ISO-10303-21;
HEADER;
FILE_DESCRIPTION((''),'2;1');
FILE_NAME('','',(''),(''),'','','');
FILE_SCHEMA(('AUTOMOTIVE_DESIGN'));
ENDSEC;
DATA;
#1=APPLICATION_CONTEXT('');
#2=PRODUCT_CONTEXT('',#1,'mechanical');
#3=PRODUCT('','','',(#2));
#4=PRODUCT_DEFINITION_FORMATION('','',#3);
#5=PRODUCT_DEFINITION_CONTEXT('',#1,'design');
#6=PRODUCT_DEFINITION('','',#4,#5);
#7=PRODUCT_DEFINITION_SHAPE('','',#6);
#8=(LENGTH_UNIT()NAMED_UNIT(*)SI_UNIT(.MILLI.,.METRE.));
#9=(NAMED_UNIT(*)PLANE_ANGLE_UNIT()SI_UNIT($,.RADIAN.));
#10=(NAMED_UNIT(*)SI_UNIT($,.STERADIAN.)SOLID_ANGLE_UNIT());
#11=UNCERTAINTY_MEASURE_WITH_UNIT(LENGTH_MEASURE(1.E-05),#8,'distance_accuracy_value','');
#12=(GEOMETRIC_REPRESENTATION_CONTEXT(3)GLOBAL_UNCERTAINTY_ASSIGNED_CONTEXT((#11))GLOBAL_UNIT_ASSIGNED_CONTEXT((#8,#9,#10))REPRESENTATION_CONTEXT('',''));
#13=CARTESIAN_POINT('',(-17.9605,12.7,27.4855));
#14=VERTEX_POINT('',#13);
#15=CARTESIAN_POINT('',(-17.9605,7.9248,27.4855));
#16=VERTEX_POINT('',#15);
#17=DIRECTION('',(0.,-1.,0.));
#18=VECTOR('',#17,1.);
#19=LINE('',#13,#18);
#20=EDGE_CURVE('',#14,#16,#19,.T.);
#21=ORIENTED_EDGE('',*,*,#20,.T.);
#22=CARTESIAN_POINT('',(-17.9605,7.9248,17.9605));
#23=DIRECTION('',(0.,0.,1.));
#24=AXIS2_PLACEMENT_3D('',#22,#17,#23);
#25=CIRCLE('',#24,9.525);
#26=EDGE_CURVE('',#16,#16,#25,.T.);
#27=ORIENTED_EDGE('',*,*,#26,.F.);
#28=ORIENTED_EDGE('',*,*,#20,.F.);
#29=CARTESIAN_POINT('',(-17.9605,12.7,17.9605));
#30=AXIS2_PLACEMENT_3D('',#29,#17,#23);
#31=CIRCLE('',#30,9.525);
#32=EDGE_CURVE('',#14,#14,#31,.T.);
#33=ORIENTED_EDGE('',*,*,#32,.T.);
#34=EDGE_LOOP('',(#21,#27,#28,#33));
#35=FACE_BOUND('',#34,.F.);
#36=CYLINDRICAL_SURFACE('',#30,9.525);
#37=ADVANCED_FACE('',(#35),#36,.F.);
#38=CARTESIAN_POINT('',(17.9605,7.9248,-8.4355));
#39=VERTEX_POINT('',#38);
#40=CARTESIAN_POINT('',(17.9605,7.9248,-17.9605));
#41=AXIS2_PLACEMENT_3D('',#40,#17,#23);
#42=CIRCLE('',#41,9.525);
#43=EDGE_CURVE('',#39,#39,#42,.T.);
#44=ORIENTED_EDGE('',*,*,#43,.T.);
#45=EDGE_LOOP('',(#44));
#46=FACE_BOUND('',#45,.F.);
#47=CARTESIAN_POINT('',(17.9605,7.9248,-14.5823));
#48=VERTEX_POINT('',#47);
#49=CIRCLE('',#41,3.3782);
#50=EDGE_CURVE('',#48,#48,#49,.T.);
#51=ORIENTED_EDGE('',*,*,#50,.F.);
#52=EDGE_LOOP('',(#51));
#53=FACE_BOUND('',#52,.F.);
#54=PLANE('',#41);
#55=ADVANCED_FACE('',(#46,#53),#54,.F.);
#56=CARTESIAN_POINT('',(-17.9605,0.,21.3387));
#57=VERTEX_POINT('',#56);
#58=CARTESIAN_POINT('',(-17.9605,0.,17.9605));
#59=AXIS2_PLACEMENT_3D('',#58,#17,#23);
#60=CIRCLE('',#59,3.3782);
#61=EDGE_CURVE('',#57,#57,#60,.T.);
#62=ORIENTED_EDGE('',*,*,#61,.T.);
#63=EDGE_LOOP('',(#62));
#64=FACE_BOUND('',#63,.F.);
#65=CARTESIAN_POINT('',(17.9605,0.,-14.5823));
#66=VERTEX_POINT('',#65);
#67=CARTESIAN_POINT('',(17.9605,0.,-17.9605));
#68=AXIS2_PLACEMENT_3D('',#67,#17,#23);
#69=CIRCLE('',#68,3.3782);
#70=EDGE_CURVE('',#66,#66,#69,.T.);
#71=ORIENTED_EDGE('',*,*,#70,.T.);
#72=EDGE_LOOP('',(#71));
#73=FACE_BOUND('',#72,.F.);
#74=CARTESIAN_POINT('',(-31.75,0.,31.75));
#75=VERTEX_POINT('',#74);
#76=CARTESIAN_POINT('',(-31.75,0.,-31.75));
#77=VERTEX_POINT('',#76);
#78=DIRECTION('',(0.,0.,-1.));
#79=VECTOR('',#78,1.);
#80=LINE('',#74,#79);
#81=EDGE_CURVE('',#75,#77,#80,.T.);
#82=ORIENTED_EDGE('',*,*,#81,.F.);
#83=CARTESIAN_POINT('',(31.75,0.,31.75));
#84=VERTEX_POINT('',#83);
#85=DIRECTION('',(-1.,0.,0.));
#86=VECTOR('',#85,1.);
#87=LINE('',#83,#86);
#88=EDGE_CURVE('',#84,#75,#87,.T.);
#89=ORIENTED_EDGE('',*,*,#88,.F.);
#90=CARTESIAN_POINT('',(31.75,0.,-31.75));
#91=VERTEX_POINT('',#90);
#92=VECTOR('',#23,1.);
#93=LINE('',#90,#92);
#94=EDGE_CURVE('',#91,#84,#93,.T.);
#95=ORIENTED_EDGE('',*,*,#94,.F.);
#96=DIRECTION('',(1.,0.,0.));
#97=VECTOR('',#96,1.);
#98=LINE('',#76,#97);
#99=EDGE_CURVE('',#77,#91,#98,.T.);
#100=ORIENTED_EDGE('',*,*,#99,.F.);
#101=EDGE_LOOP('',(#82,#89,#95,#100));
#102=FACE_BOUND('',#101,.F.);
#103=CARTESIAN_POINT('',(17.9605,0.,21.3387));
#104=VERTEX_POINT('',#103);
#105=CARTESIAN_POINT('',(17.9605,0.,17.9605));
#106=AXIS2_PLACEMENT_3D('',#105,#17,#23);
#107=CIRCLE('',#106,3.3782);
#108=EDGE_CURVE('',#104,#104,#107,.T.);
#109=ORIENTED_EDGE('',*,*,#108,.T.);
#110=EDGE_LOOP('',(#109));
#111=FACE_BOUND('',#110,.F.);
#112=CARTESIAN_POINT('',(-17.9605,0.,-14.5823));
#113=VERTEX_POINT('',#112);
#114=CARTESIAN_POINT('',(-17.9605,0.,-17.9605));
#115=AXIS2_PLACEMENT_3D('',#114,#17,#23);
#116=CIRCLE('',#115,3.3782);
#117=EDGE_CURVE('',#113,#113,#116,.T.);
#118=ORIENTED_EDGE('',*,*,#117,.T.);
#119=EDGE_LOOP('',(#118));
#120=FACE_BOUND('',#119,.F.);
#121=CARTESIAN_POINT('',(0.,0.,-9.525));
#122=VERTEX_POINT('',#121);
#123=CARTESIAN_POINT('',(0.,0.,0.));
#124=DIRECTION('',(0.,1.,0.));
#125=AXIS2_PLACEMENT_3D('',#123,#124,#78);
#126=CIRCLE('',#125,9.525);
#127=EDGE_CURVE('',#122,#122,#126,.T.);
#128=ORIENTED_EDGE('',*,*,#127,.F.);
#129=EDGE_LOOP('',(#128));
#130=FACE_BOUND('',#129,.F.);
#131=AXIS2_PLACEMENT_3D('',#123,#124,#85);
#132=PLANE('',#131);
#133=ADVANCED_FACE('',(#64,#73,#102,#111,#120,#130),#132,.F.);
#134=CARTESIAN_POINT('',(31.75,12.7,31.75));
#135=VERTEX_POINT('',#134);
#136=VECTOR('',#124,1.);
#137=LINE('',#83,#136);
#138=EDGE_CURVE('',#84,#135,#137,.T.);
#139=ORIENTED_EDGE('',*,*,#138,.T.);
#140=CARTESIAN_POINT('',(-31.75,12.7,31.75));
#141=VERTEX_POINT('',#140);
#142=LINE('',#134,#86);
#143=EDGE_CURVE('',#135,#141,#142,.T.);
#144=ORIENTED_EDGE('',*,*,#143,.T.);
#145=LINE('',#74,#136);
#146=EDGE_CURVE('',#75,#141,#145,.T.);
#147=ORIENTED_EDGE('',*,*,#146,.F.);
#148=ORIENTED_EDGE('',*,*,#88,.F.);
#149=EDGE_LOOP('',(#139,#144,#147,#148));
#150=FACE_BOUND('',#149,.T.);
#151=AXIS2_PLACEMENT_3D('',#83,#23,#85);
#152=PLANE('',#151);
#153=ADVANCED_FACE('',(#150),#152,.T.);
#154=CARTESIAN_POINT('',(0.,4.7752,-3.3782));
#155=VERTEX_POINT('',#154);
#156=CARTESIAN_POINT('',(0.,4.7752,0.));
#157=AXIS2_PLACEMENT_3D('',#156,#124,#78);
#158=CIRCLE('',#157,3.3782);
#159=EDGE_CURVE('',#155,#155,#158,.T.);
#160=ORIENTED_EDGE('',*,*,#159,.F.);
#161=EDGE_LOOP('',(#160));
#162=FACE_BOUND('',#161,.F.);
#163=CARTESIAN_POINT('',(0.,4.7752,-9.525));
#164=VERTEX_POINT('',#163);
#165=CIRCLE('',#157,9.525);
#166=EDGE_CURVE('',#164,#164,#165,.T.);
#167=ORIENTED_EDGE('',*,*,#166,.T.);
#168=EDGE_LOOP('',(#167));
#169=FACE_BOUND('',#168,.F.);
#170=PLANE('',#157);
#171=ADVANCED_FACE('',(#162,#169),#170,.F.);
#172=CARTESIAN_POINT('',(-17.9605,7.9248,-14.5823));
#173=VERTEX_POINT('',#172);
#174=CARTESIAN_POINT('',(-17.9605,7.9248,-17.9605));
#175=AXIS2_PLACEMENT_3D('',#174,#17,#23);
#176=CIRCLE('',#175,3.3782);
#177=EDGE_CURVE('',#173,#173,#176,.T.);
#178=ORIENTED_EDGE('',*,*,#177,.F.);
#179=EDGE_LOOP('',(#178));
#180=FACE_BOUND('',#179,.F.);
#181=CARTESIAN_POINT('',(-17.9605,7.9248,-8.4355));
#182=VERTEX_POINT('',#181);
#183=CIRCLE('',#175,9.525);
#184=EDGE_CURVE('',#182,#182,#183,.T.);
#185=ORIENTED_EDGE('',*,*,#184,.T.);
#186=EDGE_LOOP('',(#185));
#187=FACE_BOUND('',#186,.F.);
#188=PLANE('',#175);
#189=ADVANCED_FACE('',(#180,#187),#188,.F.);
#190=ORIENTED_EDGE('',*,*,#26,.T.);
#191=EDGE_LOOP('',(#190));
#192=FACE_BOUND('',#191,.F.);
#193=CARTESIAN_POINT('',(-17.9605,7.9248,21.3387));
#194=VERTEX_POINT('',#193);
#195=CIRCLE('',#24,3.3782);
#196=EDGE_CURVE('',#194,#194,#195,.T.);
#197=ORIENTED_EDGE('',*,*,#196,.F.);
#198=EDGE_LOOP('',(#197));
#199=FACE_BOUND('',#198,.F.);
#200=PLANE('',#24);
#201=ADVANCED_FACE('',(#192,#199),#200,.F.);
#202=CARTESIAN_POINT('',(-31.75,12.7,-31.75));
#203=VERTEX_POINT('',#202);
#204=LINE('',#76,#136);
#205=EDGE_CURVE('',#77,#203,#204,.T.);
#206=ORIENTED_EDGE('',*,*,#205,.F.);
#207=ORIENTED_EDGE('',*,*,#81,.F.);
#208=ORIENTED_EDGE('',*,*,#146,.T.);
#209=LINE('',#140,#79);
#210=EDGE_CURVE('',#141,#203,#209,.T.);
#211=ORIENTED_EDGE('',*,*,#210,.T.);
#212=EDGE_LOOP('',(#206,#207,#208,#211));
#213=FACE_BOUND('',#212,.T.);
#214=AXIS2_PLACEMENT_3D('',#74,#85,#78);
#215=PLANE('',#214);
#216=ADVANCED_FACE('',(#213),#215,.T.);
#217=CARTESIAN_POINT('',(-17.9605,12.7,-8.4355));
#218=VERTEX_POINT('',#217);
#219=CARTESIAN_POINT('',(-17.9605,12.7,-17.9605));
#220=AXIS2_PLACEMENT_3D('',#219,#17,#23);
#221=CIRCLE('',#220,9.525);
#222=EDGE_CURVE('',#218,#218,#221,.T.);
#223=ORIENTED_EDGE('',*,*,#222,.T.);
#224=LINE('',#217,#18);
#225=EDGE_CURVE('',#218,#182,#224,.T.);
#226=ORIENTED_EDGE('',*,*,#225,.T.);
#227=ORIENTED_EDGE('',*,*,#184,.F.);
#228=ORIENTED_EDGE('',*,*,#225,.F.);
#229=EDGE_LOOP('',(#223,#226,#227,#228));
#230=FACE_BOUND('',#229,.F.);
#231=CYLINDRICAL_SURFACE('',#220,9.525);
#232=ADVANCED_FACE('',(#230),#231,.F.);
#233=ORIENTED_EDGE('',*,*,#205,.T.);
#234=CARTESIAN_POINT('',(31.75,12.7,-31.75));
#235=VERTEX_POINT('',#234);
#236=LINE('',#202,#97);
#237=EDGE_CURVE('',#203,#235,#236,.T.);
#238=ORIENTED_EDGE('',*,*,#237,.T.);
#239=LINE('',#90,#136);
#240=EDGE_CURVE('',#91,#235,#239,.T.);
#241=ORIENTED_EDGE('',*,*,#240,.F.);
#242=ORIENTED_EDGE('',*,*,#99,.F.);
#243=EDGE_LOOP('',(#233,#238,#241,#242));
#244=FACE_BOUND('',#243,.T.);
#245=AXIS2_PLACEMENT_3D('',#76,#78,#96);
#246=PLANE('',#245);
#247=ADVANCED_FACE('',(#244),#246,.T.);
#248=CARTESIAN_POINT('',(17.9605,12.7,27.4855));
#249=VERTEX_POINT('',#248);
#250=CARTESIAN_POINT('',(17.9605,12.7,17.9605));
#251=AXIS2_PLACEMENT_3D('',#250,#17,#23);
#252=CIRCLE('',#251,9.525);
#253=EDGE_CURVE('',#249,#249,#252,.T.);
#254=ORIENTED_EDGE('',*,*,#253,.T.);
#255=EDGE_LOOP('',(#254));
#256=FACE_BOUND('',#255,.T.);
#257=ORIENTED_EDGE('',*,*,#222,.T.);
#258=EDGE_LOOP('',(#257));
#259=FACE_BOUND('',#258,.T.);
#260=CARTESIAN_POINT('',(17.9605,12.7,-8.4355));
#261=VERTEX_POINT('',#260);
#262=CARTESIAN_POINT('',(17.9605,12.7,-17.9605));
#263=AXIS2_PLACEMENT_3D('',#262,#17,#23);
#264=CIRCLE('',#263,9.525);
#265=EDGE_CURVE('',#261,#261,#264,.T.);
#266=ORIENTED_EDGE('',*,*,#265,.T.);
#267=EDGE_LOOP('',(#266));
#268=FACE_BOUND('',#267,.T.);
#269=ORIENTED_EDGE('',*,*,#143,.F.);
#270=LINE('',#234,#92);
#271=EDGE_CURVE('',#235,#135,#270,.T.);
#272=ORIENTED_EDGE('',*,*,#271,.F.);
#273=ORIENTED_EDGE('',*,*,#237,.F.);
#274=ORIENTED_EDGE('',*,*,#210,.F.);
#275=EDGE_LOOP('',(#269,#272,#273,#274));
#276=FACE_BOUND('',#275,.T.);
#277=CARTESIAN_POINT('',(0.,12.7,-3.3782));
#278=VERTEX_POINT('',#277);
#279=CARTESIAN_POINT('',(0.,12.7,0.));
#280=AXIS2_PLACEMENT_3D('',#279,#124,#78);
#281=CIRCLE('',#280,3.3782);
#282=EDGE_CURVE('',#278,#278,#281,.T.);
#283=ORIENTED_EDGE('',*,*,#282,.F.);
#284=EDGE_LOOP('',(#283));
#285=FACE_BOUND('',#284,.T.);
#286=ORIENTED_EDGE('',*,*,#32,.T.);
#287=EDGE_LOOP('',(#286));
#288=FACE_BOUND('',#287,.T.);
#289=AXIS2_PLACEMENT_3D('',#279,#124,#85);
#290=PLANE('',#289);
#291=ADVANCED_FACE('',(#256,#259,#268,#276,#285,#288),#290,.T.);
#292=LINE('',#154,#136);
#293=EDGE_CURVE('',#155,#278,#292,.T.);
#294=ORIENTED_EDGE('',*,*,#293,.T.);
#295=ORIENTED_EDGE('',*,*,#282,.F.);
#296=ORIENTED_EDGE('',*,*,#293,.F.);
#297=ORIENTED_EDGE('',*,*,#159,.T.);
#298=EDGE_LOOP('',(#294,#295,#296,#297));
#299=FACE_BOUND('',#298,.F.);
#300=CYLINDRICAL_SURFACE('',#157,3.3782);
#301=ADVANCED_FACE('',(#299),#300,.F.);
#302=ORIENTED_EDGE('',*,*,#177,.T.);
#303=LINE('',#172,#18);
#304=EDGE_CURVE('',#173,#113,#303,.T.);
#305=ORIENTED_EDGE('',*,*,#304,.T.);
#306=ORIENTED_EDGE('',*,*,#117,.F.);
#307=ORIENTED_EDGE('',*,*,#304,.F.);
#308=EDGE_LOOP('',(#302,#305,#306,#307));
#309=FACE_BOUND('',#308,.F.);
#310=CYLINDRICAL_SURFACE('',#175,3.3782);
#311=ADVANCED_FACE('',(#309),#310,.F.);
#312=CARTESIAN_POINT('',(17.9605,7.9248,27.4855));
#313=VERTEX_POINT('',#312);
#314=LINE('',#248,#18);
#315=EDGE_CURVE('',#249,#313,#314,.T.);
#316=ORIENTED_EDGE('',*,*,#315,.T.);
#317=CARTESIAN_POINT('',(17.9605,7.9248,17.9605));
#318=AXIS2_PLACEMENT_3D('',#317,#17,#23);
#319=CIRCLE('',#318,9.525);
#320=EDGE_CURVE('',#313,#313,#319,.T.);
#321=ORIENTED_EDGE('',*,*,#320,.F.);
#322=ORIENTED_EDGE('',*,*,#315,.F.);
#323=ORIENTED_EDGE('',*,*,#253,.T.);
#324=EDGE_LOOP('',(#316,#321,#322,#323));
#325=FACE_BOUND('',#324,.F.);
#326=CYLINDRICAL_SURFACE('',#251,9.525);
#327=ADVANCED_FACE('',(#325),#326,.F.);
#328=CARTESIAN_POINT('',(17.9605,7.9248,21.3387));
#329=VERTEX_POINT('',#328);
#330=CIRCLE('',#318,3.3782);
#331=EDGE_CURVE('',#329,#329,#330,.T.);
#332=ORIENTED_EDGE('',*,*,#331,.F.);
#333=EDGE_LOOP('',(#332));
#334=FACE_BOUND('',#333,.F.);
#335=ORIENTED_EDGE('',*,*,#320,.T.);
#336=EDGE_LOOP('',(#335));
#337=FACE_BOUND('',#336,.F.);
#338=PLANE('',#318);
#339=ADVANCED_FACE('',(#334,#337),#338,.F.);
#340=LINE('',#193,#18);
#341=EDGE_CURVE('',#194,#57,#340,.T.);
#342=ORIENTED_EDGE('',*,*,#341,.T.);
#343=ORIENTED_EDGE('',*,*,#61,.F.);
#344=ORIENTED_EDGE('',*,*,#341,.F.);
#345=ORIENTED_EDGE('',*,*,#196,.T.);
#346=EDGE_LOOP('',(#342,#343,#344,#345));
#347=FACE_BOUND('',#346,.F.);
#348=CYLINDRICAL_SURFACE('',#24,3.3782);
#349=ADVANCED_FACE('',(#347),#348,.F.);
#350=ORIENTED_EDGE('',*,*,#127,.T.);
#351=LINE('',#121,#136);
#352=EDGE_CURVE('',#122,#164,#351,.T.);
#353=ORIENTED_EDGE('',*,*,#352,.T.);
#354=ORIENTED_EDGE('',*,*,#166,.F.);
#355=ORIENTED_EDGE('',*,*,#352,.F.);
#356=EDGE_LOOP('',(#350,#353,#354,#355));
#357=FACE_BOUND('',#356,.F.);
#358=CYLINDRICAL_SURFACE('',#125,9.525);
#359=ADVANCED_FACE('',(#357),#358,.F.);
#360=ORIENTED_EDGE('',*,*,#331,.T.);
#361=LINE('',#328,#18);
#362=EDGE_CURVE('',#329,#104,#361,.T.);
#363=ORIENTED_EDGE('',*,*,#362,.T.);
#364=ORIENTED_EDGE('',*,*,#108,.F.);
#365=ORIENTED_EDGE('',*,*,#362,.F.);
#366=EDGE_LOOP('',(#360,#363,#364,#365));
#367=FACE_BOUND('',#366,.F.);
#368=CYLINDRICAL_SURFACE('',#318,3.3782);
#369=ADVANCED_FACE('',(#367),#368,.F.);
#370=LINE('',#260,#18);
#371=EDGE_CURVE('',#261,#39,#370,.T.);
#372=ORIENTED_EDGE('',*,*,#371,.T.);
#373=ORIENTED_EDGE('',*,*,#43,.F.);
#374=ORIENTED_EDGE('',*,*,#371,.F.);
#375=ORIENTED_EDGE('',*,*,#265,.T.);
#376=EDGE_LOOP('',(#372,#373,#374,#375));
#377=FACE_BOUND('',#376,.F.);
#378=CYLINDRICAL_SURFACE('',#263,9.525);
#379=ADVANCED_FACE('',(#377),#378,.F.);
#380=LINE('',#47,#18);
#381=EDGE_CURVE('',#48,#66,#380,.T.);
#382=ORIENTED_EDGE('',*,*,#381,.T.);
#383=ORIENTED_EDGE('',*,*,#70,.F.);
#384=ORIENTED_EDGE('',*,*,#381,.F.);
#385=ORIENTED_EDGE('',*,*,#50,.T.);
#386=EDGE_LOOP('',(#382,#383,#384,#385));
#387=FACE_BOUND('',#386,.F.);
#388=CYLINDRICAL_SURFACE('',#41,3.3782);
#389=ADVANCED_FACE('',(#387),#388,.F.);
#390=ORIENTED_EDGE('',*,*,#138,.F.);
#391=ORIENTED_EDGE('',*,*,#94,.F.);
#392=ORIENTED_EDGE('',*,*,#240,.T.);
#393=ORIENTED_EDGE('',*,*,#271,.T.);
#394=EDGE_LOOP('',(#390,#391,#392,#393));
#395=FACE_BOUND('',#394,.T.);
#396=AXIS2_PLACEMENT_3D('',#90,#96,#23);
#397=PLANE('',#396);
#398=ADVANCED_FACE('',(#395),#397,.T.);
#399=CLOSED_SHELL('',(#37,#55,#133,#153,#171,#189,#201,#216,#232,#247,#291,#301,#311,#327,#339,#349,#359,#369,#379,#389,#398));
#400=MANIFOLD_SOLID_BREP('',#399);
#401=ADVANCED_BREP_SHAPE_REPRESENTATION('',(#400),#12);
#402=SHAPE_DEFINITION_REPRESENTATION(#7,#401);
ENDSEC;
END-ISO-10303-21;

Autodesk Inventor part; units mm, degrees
ref_plane "YZ Plane" through (0, 0, 0) normal (1, 0, 0) x (0, 1, 0)
ref_plane "XZ Plane" through (0, 0, 0) normal (0, 1, 0) x (-1, 0, 0)
ref_plane "XY Plane" through (0, 0, 0) normal (0, 0, 1) x (1, 0, 0)
sketch "Sketch1" plane through (0, 0, 0) normal (0, 1, 0) x (-1, 0, 0)
  line L0 (-31.75, 31.75) -> (31.75, 31.75)
  line L1 (31.75, 31.75) -> (31.75, -31.75)
  line L2 (31.75, -31.75) -> (-31.75, -31.75)
  line L3 (-31.75, -31.75) -> (-31.75, 31.75)
  line L4 (-31.75, 31.75) -> (31.75, -31.75) construction
  line L5 (31.75, 31.75) -> (-31.75, -31.75) construction
  point P0 (0, 0)
  dimension "d0" = 63.5
  dimension "d1" = 63.5
extrude "Extrusion1" add sketch "Sketch1" along normal blind 12.7
sketch "Sketch2" plane through (0, 12.7, 0) normal (0, 1, 0) x (1, 0, 0)
  line L0 (0, 0) -> (17.9605, 17.9605)
  line L1 (0, 0) -> (25.4, 0) construction
  line L2 (0, 0) -> (-17.9605, 17.9605)
  line L3 (0, 0) -> (-17.9605, -17.9605)
  line L4 (0, 0) -> (17.9605, -17.9605)
  dimension "d4" = 25.4
  dimension "d5" = 45
  dimension "d8" = 360
hole "Hole1" at (17.9605, 12.7, 17.9605) at (-17.9605, 12.7, -17.9605) at (-17.9605, 12.7, 17.9605) at (17.9605, 12.7, -17.9605) direction (0, -1, 0) diameter 6.7564 end up to surface counterbore diameter 19.05 counterbore depth 4.7752 clearance for "Hex Head Bolt" size "1/4" standard "Ansi Unified Screw Threads"
sketch "Sketch3" plane through (0, 0, 0) normal (0, -1, 0) x (1, 0, 0)
  circle A0 centre (0, 0) radius 12.7
  dimension "d17" = 25.4
hole "Hole2" at (0, 0, 0) direction (0, 1, 0) diameter 6.7564 end up to surface counterbore diameter 19.05 counterbore depth 4.7752 clearance for "Hex Head Bolt" size "1/4" standard "Ansi Unified Screw Threads"
properties part number "feet type 1 part 1" material "Stainless Steel"
